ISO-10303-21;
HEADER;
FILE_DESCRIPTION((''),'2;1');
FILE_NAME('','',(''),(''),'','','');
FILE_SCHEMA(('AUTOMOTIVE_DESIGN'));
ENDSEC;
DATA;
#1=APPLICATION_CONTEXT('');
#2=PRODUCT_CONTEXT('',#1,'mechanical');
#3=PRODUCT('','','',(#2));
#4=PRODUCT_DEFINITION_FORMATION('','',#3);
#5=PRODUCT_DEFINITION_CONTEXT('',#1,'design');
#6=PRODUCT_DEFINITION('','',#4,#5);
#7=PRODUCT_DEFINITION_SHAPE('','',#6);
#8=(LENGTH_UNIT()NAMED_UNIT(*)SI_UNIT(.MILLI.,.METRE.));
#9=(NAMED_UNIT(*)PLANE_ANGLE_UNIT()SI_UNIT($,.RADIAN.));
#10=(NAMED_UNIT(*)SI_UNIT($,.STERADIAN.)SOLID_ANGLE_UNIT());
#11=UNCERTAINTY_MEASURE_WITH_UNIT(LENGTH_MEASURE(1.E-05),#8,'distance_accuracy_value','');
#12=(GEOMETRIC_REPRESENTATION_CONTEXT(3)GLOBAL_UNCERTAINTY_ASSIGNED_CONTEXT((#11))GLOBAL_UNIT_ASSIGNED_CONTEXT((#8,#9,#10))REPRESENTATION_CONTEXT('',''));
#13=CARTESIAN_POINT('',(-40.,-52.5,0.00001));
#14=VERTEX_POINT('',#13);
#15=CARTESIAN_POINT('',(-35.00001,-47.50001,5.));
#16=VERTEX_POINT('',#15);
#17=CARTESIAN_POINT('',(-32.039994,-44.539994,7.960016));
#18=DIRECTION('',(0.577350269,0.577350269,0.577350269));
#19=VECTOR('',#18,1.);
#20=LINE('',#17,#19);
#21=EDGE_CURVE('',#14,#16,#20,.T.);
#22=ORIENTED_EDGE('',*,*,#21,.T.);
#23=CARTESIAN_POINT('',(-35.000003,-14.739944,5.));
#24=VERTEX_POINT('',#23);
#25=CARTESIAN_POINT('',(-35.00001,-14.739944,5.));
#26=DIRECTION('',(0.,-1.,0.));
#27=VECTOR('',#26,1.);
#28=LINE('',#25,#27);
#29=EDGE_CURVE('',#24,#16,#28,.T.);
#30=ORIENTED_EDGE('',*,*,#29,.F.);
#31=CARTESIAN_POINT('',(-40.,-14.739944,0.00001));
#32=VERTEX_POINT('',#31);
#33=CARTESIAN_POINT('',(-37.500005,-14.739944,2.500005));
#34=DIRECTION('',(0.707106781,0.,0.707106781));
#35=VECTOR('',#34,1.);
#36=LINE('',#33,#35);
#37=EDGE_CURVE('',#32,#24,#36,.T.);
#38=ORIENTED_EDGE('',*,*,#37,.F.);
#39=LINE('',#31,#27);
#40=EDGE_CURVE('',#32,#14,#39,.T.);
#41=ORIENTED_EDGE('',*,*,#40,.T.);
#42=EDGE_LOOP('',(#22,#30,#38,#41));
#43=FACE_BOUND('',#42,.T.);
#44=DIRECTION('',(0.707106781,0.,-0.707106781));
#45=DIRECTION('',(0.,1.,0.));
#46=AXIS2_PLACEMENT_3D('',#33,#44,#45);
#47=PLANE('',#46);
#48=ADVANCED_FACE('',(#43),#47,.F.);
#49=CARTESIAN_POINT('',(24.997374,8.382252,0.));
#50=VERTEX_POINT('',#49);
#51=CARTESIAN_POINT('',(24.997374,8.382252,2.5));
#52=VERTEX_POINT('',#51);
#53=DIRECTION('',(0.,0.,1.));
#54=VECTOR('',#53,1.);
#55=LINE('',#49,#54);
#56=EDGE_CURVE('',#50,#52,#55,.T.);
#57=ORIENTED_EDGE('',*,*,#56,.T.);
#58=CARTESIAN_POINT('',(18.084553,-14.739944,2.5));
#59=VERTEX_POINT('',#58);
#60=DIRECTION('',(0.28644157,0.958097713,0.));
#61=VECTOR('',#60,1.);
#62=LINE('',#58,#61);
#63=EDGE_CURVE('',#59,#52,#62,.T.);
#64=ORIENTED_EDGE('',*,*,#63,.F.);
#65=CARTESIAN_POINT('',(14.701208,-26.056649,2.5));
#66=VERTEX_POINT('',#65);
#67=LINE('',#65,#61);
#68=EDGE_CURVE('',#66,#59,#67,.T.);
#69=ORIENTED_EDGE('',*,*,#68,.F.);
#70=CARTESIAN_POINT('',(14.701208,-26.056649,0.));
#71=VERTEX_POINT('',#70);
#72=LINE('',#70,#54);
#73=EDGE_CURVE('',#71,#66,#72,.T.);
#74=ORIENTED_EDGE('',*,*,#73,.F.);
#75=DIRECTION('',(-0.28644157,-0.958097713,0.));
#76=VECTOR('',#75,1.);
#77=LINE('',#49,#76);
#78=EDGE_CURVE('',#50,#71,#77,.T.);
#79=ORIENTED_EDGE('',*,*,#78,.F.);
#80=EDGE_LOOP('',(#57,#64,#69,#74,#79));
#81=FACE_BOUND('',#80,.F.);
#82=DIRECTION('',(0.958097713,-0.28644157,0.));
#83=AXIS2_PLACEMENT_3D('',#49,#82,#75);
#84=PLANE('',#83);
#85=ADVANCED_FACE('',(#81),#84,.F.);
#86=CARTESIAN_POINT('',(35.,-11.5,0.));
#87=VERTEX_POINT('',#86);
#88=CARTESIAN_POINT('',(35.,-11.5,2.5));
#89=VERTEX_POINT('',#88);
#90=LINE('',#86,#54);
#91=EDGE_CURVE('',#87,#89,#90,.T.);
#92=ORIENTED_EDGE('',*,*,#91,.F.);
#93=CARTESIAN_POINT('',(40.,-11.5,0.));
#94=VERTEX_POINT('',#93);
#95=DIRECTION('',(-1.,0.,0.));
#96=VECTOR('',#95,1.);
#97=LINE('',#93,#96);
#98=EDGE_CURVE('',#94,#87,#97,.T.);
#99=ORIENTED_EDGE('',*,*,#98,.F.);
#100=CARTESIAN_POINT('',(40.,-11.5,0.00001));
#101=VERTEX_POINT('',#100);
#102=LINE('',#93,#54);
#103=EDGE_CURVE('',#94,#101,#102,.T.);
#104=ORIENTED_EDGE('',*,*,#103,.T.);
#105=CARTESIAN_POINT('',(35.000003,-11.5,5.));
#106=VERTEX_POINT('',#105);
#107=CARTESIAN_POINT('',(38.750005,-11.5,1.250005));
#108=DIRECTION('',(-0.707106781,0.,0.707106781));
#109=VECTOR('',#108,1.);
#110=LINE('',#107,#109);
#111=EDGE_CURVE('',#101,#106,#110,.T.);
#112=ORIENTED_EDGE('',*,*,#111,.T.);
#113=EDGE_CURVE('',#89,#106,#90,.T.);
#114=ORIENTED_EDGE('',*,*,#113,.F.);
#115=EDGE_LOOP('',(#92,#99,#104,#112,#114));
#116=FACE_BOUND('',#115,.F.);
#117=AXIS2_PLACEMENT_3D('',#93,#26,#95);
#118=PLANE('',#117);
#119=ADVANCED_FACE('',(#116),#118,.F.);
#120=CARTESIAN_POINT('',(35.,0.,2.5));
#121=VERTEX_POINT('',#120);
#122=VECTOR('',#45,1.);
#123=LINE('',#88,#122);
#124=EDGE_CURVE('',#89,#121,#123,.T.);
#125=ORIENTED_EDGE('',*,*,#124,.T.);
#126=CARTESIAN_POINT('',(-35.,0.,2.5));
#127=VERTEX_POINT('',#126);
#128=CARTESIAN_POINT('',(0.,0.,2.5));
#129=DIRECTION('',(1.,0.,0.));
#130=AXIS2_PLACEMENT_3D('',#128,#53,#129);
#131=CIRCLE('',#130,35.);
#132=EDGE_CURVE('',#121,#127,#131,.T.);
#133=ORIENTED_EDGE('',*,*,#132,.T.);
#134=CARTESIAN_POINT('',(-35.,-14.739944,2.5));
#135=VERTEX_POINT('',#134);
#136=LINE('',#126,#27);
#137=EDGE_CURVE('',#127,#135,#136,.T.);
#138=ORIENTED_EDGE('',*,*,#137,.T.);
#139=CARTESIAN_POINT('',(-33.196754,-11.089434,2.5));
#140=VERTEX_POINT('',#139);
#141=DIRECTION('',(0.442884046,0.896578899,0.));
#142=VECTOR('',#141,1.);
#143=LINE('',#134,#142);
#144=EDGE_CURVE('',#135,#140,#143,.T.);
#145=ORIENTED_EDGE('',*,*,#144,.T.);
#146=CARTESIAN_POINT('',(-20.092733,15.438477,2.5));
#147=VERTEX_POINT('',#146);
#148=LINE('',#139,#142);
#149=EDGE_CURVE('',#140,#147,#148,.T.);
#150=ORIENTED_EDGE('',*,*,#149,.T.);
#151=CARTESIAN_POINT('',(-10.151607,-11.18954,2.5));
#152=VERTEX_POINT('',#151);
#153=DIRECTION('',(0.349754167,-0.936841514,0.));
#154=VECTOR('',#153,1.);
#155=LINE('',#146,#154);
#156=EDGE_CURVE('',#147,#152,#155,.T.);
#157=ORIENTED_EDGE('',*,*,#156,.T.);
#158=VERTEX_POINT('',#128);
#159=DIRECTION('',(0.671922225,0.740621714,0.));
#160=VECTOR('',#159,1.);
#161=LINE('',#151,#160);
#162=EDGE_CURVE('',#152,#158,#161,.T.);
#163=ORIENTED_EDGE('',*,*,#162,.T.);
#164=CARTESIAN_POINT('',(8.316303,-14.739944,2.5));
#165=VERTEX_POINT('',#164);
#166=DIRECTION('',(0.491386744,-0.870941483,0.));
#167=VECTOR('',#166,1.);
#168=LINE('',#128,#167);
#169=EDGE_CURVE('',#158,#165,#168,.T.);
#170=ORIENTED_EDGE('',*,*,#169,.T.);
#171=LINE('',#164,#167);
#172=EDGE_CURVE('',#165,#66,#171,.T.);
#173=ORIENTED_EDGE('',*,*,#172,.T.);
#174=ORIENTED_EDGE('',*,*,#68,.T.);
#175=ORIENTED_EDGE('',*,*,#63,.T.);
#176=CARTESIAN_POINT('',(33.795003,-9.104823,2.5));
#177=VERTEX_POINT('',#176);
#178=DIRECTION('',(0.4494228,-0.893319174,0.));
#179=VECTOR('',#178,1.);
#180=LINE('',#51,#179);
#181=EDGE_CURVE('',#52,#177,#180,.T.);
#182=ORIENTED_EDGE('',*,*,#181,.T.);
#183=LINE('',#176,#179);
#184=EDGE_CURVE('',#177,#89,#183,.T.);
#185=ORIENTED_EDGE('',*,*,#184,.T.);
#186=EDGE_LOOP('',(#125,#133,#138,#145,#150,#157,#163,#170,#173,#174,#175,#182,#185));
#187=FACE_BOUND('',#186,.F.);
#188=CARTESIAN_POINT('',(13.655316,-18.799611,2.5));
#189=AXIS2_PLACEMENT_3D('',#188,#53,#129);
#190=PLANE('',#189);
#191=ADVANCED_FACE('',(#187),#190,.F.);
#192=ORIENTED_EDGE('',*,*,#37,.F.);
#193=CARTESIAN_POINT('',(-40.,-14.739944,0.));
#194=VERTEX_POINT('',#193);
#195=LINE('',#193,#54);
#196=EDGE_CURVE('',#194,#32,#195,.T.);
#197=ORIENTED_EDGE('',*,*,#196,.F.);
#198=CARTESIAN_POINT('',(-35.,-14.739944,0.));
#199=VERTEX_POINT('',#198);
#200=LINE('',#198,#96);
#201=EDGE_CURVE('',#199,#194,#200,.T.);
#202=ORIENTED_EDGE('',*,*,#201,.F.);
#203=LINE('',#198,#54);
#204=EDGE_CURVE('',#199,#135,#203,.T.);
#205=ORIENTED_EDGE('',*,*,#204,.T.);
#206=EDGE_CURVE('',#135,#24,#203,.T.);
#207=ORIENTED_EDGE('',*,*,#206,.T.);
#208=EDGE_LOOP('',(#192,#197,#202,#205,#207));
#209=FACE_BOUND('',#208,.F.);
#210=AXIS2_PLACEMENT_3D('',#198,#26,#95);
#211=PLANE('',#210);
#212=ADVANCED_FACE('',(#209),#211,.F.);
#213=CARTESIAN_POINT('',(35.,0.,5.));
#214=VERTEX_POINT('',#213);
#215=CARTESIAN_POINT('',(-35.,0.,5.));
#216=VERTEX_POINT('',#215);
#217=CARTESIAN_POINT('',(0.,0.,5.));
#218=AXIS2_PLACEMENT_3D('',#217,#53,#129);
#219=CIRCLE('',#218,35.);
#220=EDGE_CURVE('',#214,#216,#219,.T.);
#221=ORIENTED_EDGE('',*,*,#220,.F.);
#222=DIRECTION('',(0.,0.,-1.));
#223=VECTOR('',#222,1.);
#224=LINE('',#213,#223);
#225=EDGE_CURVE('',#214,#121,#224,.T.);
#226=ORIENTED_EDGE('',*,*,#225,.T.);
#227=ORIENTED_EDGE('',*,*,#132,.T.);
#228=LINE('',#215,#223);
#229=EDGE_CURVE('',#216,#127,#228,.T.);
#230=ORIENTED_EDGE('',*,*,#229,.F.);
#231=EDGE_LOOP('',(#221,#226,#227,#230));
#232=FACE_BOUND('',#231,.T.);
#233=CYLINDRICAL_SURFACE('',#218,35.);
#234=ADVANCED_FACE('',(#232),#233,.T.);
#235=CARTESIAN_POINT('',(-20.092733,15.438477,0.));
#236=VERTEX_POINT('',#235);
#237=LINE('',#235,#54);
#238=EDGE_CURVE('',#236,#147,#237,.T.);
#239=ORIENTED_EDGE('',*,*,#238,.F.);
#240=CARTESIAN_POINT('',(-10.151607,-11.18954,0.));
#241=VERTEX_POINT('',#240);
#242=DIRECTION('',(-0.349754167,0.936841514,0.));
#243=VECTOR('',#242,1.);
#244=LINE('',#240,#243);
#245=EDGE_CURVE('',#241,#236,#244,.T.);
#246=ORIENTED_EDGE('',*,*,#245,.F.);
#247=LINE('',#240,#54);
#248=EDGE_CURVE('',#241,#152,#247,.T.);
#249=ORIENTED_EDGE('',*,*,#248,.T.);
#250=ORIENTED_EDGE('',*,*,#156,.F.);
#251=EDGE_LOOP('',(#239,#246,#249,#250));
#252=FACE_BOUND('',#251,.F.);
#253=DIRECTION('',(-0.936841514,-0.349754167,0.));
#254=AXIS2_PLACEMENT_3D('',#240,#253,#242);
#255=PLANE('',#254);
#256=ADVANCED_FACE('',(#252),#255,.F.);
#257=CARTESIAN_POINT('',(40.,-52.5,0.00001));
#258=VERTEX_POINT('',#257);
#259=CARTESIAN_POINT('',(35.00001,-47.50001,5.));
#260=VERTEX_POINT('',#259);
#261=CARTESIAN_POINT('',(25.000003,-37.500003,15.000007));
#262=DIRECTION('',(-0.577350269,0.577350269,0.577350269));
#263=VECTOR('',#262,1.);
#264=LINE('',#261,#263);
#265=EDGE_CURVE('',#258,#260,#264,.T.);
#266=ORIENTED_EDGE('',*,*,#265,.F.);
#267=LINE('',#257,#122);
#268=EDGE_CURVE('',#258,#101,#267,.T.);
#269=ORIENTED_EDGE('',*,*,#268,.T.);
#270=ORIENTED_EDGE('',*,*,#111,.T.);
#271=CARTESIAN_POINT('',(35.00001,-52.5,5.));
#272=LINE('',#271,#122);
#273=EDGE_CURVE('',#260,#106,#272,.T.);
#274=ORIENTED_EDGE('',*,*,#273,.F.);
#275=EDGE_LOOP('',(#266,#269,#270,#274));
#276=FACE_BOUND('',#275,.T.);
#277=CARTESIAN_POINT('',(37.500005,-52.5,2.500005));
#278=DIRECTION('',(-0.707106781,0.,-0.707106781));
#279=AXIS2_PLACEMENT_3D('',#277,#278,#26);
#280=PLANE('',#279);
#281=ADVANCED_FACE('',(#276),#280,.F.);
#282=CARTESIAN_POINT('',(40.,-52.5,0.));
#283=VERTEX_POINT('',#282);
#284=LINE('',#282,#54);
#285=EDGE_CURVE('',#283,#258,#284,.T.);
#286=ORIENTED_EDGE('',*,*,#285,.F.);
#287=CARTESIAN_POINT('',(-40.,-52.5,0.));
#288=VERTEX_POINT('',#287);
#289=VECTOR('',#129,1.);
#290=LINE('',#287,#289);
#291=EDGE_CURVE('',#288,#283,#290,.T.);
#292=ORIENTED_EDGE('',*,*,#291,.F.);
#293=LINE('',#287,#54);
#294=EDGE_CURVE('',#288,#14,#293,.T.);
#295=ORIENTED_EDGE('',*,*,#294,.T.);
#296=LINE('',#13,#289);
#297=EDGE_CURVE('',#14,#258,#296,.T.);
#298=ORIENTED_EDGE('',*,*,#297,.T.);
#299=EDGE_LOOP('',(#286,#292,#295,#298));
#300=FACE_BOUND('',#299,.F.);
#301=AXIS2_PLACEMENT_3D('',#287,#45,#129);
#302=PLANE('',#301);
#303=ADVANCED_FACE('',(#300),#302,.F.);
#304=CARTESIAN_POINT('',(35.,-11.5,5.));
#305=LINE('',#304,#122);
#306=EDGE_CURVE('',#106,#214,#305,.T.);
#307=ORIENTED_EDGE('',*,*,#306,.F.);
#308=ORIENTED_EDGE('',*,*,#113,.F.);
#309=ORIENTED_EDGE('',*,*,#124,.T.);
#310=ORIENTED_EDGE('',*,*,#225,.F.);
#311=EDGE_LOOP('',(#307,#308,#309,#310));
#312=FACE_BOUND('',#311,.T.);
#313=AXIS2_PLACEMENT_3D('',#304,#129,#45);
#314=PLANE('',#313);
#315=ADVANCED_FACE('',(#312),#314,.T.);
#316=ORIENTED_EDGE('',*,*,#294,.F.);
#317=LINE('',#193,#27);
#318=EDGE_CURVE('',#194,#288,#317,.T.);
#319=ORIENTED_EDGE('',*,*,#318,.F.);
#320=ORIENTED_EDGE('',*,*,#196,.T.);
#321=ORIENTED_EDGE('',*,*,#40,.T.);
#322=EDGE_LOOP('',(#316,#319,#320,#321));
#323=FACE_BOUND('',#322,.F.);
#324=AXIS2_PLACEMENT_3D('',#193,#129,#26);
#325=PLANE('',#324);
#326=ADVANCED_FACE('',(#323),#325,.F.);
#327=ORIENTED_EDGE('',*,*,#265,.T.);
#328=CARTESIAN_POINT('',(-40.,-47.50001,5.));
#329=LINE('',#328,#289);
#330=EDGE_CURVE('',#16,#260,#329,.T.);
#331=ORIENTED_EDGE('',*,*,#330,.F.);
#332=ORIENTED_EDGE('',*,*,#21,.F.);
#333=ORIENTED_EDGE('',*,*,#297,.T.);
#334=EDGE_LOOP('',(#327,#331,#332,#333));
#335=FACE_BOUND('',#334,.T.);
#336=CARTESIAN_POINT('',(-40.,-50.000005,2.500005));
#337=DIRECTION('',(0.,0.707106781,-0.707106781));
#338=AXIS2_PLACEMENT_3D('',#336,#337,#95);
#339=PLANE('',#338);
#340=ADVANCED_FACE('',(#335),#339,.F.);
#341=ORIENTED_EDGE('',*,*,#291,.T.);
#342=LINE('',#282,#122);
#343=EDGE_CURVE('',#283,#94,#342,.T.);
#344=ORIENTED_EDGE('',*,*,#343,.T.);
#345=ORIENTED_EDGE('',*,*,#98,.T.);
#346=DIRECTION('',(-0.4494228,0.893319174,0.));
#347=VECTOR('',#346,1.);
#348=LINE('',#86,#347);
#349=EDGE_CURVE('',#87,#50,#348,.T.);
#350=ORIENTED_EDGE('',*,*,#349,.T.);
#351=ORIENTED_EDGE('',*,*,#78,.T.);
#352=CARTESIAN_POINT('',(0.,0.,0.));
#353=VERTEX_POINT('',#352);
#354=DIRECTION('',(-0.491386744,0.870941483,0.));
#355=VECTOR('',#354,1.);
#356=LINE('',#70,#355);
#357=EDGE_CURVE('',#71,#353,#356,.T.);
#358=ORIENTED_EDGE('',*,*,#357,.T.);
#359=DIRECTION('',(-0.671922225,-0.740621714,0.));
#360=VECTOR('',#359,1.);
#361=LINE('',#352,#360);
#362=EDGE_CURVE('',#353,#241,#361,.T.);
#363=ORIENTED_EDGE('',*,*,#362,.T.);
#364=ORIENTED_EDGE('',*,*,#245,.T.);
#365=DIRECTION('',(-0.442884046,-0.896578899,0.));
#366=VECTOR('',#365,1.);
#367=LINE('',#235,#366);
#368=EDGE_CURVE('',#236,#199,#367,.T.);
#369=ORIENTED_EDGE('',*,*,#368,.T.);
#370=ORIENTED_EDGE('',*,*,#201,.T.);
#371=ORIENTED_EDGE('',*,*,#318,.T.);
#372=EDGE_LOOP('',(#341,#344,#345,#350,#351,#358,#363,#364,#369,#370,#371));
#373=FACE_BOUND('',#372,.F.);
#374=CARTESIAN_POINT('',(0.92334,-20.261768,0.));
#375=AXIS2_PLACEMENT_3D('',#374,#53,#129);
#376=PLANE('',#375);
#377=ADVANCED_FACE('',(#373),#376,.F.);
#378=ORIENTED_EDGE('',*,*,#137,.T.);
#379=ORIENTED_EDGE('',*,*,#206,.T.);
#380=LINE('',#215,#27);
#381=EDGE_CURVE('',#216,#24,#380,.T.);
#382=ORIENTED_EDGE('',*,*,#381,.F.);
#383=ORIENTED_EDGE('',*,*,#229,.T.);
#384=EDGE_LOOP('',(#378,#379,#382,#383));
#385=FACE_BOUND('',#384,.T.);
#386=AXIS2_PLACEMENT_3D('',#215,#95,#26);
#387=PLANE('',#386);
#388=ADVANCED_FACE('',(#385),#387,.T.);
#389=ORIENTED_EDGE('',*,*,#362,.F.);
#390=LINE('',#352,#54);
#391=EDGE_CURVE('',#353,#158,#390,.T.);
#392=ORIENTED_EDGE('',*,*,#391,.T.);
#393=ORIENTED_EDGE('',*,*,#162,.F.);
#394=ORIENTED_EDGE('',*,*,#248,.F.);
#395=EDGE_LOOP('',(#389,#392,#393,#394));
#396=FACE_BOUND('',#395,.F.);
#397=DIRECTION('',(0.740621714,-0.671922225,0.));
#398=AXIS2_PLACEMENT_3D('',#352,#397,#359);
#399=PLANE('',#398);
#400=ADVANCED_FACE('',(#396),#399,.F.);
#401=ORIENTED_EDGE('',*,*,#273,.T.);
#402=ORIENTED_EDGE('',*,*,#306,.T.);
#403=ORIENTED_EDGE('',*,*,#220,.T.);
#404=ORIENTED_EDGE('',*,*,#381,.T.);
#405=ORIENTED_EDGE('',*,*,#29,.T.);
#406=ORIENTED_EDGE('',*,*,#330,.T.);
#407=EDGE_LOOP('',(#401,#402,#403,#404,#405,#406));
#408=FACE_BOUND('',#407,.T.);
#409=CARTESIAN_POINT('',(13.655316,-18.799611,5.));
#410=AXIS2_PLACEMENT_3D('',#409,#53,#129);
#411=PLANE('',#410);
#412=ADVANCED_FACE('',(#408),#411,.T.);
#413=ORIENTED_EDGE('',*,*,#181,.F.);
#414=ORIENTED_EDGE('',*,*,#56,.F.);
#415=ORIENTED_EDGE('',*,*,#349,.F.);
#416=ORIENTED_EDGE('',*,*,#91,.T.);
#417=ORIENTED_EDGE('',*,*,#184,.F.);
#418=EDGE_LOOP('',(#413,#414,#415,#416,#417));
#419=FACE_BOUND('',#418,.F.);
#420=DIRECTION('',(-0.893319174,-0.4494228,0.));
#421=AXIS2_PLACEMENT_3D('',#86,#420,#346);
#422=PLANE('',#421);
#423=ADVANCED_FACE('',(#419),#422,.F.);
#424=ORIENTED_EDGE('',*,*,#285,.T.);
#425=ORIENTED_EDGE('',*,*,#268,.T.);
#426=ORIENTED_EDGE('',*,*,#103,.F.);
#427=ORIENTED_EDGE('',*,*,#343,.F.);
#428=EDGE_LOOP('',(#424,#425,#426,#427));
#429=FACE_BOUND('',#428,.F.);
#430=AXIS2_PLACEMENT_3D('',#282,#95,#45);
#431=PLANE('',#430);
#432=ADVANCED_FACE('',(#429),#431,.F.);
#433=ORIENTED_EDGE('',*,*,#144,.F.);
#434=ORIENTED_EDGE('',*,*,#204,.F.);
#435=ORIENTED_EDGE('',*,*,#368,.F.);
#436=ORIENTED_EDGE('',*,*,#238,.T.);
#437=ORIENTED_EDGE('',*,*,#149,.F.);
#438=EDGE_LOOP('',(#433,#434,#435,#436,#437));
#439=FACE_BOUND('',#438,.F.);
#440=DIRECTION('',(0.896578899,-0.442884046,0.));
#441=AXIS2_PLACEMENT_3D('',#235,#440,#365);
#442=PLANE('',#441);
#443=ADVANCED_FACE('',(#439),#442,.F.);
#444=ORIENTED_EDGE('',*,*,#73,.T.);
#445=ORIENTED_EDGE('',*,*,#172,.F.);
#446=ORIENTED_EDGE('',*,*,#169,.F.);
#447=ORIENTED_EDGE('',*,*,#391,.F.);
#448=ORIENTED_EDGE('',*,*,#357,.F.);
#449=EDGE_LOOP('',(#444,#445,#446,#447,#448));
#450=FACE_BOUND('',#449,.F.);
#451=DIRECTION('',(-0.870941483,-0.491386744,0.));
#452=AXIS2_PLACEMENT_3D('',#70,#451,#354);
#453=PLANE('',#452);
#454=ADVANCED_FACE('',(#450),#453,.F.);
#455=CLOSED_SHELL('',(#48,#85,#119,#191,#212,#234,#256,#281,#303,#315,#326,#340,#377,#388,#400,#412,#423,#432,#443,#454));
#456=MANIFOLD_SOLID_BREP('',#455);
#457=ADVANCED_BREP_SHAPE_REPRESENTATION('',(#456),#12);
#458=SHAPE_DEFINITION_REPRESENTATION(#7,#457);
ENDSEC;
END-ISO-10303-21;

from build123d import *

# Parameters (mm, degrees)
F1_DEPTH = 5
F2_SIZE  = 4.99999
F4_DEPTH = 2.5


# Not quite as in the source:
# - a fillet or chamfer is up to 0.001 mm smaller than in the source, because OpenCascade refuses the exact size


with BuildPart() as f1:
    # F0 (on Top) → F1 (new body)
    with BuildSketch(Plane.XY):
        Polygon((-35, -47.5), (35, -47.5), (35, -11.5), (24.9973740429, 8.3822524399), (14.7012080997, -26.056649141), (0, 0), (-10.1516069844, -11.1895399168), (-20.0927332044, 15.4384765774), (-35, -14.7399436682), align=None)
        Polygon((35, -11.5), (35, -47.5), (-35, -47.5), (-35, -14.7399436682), (-40, -14.7399436682), (-40, -52.5), (40, -52.5), (40, -11.5), align=None)
    extrude(amount=F1_DEPTH)

    # F2 (size 5 in the source; OpenCascade refuses exactly that, so slightly less here)
    f2_edges = [f1.edges().sort_by_distance(p)[0] for p in [
        (-40, -33.619972, 5),
        (0, -52.5, 5),
        (40, -32, 5),
    ]]
    chamfer(f2_edges, length=F2_SIZE)

    # F3 (on face) → F4 (join)
    with BuildSketch(Plane.XY.offset(5)):
        Polygon((14.7012080997, -26.056649141), (18.0845528677, -14.7399436682), (8.3163026095, -14.7399436682), align=None)
        with BuildLine():
            ThreePointArc((33.7950026252, -9.1048227638), (34.6974429309, -4.5921078013), (35, 0))
            ThreePointArc((35, 0), (0, 35), (-35, 0))
            ThreePointArc((-35, 0), (-34.5462471197, -5.6175448326), (-33.1967537173, -11.0894338283))
            Line((-33.1967537173, -11.0894338283), (-20.0927332044, 15.4384765774))
            Line((-20.0927332044, 15.4384765774), (-10.1516069844, -11.1895399168))
            Line((-10.1516069844, -11.1895399168), (0, 0))
            Line((0, 0), (8.3163026095, -14.7399436682))
            Line((8.3163026095, -14.7399436682), (18.0845528677, -14.7399436682))
            Line((18.0845528677, -14.7399436682), (24.9973740429, 8.3822524399))
            Line((24.9973740429, 8.3822524399), (33.7950026252, -9.1048227638))
        make_face()
        with BuildLine():
            Line((35, -11.5), (35, 0))
            ThreePointArc((35, 0), (34.6974429309, -4.5921078013), (33.7950026252, -9.1048227638))
            Line((33.7950026252, -9.1048227638), (35, -11.5))
        make_face()
        with BuildLine():
            ThreePointArc((-33.1967537173, -11.0894338283), (-34.5462471197, -5.6175448326), (-35, 0))
            Line((-35, 0), (-35, -14.7399436682))
            Line((-35, -14.7399436682), (-33.1967537173, -11.0894338283))
        make_face()
    extrude(amount=-F4_DEPTH)


solid = f1.part
